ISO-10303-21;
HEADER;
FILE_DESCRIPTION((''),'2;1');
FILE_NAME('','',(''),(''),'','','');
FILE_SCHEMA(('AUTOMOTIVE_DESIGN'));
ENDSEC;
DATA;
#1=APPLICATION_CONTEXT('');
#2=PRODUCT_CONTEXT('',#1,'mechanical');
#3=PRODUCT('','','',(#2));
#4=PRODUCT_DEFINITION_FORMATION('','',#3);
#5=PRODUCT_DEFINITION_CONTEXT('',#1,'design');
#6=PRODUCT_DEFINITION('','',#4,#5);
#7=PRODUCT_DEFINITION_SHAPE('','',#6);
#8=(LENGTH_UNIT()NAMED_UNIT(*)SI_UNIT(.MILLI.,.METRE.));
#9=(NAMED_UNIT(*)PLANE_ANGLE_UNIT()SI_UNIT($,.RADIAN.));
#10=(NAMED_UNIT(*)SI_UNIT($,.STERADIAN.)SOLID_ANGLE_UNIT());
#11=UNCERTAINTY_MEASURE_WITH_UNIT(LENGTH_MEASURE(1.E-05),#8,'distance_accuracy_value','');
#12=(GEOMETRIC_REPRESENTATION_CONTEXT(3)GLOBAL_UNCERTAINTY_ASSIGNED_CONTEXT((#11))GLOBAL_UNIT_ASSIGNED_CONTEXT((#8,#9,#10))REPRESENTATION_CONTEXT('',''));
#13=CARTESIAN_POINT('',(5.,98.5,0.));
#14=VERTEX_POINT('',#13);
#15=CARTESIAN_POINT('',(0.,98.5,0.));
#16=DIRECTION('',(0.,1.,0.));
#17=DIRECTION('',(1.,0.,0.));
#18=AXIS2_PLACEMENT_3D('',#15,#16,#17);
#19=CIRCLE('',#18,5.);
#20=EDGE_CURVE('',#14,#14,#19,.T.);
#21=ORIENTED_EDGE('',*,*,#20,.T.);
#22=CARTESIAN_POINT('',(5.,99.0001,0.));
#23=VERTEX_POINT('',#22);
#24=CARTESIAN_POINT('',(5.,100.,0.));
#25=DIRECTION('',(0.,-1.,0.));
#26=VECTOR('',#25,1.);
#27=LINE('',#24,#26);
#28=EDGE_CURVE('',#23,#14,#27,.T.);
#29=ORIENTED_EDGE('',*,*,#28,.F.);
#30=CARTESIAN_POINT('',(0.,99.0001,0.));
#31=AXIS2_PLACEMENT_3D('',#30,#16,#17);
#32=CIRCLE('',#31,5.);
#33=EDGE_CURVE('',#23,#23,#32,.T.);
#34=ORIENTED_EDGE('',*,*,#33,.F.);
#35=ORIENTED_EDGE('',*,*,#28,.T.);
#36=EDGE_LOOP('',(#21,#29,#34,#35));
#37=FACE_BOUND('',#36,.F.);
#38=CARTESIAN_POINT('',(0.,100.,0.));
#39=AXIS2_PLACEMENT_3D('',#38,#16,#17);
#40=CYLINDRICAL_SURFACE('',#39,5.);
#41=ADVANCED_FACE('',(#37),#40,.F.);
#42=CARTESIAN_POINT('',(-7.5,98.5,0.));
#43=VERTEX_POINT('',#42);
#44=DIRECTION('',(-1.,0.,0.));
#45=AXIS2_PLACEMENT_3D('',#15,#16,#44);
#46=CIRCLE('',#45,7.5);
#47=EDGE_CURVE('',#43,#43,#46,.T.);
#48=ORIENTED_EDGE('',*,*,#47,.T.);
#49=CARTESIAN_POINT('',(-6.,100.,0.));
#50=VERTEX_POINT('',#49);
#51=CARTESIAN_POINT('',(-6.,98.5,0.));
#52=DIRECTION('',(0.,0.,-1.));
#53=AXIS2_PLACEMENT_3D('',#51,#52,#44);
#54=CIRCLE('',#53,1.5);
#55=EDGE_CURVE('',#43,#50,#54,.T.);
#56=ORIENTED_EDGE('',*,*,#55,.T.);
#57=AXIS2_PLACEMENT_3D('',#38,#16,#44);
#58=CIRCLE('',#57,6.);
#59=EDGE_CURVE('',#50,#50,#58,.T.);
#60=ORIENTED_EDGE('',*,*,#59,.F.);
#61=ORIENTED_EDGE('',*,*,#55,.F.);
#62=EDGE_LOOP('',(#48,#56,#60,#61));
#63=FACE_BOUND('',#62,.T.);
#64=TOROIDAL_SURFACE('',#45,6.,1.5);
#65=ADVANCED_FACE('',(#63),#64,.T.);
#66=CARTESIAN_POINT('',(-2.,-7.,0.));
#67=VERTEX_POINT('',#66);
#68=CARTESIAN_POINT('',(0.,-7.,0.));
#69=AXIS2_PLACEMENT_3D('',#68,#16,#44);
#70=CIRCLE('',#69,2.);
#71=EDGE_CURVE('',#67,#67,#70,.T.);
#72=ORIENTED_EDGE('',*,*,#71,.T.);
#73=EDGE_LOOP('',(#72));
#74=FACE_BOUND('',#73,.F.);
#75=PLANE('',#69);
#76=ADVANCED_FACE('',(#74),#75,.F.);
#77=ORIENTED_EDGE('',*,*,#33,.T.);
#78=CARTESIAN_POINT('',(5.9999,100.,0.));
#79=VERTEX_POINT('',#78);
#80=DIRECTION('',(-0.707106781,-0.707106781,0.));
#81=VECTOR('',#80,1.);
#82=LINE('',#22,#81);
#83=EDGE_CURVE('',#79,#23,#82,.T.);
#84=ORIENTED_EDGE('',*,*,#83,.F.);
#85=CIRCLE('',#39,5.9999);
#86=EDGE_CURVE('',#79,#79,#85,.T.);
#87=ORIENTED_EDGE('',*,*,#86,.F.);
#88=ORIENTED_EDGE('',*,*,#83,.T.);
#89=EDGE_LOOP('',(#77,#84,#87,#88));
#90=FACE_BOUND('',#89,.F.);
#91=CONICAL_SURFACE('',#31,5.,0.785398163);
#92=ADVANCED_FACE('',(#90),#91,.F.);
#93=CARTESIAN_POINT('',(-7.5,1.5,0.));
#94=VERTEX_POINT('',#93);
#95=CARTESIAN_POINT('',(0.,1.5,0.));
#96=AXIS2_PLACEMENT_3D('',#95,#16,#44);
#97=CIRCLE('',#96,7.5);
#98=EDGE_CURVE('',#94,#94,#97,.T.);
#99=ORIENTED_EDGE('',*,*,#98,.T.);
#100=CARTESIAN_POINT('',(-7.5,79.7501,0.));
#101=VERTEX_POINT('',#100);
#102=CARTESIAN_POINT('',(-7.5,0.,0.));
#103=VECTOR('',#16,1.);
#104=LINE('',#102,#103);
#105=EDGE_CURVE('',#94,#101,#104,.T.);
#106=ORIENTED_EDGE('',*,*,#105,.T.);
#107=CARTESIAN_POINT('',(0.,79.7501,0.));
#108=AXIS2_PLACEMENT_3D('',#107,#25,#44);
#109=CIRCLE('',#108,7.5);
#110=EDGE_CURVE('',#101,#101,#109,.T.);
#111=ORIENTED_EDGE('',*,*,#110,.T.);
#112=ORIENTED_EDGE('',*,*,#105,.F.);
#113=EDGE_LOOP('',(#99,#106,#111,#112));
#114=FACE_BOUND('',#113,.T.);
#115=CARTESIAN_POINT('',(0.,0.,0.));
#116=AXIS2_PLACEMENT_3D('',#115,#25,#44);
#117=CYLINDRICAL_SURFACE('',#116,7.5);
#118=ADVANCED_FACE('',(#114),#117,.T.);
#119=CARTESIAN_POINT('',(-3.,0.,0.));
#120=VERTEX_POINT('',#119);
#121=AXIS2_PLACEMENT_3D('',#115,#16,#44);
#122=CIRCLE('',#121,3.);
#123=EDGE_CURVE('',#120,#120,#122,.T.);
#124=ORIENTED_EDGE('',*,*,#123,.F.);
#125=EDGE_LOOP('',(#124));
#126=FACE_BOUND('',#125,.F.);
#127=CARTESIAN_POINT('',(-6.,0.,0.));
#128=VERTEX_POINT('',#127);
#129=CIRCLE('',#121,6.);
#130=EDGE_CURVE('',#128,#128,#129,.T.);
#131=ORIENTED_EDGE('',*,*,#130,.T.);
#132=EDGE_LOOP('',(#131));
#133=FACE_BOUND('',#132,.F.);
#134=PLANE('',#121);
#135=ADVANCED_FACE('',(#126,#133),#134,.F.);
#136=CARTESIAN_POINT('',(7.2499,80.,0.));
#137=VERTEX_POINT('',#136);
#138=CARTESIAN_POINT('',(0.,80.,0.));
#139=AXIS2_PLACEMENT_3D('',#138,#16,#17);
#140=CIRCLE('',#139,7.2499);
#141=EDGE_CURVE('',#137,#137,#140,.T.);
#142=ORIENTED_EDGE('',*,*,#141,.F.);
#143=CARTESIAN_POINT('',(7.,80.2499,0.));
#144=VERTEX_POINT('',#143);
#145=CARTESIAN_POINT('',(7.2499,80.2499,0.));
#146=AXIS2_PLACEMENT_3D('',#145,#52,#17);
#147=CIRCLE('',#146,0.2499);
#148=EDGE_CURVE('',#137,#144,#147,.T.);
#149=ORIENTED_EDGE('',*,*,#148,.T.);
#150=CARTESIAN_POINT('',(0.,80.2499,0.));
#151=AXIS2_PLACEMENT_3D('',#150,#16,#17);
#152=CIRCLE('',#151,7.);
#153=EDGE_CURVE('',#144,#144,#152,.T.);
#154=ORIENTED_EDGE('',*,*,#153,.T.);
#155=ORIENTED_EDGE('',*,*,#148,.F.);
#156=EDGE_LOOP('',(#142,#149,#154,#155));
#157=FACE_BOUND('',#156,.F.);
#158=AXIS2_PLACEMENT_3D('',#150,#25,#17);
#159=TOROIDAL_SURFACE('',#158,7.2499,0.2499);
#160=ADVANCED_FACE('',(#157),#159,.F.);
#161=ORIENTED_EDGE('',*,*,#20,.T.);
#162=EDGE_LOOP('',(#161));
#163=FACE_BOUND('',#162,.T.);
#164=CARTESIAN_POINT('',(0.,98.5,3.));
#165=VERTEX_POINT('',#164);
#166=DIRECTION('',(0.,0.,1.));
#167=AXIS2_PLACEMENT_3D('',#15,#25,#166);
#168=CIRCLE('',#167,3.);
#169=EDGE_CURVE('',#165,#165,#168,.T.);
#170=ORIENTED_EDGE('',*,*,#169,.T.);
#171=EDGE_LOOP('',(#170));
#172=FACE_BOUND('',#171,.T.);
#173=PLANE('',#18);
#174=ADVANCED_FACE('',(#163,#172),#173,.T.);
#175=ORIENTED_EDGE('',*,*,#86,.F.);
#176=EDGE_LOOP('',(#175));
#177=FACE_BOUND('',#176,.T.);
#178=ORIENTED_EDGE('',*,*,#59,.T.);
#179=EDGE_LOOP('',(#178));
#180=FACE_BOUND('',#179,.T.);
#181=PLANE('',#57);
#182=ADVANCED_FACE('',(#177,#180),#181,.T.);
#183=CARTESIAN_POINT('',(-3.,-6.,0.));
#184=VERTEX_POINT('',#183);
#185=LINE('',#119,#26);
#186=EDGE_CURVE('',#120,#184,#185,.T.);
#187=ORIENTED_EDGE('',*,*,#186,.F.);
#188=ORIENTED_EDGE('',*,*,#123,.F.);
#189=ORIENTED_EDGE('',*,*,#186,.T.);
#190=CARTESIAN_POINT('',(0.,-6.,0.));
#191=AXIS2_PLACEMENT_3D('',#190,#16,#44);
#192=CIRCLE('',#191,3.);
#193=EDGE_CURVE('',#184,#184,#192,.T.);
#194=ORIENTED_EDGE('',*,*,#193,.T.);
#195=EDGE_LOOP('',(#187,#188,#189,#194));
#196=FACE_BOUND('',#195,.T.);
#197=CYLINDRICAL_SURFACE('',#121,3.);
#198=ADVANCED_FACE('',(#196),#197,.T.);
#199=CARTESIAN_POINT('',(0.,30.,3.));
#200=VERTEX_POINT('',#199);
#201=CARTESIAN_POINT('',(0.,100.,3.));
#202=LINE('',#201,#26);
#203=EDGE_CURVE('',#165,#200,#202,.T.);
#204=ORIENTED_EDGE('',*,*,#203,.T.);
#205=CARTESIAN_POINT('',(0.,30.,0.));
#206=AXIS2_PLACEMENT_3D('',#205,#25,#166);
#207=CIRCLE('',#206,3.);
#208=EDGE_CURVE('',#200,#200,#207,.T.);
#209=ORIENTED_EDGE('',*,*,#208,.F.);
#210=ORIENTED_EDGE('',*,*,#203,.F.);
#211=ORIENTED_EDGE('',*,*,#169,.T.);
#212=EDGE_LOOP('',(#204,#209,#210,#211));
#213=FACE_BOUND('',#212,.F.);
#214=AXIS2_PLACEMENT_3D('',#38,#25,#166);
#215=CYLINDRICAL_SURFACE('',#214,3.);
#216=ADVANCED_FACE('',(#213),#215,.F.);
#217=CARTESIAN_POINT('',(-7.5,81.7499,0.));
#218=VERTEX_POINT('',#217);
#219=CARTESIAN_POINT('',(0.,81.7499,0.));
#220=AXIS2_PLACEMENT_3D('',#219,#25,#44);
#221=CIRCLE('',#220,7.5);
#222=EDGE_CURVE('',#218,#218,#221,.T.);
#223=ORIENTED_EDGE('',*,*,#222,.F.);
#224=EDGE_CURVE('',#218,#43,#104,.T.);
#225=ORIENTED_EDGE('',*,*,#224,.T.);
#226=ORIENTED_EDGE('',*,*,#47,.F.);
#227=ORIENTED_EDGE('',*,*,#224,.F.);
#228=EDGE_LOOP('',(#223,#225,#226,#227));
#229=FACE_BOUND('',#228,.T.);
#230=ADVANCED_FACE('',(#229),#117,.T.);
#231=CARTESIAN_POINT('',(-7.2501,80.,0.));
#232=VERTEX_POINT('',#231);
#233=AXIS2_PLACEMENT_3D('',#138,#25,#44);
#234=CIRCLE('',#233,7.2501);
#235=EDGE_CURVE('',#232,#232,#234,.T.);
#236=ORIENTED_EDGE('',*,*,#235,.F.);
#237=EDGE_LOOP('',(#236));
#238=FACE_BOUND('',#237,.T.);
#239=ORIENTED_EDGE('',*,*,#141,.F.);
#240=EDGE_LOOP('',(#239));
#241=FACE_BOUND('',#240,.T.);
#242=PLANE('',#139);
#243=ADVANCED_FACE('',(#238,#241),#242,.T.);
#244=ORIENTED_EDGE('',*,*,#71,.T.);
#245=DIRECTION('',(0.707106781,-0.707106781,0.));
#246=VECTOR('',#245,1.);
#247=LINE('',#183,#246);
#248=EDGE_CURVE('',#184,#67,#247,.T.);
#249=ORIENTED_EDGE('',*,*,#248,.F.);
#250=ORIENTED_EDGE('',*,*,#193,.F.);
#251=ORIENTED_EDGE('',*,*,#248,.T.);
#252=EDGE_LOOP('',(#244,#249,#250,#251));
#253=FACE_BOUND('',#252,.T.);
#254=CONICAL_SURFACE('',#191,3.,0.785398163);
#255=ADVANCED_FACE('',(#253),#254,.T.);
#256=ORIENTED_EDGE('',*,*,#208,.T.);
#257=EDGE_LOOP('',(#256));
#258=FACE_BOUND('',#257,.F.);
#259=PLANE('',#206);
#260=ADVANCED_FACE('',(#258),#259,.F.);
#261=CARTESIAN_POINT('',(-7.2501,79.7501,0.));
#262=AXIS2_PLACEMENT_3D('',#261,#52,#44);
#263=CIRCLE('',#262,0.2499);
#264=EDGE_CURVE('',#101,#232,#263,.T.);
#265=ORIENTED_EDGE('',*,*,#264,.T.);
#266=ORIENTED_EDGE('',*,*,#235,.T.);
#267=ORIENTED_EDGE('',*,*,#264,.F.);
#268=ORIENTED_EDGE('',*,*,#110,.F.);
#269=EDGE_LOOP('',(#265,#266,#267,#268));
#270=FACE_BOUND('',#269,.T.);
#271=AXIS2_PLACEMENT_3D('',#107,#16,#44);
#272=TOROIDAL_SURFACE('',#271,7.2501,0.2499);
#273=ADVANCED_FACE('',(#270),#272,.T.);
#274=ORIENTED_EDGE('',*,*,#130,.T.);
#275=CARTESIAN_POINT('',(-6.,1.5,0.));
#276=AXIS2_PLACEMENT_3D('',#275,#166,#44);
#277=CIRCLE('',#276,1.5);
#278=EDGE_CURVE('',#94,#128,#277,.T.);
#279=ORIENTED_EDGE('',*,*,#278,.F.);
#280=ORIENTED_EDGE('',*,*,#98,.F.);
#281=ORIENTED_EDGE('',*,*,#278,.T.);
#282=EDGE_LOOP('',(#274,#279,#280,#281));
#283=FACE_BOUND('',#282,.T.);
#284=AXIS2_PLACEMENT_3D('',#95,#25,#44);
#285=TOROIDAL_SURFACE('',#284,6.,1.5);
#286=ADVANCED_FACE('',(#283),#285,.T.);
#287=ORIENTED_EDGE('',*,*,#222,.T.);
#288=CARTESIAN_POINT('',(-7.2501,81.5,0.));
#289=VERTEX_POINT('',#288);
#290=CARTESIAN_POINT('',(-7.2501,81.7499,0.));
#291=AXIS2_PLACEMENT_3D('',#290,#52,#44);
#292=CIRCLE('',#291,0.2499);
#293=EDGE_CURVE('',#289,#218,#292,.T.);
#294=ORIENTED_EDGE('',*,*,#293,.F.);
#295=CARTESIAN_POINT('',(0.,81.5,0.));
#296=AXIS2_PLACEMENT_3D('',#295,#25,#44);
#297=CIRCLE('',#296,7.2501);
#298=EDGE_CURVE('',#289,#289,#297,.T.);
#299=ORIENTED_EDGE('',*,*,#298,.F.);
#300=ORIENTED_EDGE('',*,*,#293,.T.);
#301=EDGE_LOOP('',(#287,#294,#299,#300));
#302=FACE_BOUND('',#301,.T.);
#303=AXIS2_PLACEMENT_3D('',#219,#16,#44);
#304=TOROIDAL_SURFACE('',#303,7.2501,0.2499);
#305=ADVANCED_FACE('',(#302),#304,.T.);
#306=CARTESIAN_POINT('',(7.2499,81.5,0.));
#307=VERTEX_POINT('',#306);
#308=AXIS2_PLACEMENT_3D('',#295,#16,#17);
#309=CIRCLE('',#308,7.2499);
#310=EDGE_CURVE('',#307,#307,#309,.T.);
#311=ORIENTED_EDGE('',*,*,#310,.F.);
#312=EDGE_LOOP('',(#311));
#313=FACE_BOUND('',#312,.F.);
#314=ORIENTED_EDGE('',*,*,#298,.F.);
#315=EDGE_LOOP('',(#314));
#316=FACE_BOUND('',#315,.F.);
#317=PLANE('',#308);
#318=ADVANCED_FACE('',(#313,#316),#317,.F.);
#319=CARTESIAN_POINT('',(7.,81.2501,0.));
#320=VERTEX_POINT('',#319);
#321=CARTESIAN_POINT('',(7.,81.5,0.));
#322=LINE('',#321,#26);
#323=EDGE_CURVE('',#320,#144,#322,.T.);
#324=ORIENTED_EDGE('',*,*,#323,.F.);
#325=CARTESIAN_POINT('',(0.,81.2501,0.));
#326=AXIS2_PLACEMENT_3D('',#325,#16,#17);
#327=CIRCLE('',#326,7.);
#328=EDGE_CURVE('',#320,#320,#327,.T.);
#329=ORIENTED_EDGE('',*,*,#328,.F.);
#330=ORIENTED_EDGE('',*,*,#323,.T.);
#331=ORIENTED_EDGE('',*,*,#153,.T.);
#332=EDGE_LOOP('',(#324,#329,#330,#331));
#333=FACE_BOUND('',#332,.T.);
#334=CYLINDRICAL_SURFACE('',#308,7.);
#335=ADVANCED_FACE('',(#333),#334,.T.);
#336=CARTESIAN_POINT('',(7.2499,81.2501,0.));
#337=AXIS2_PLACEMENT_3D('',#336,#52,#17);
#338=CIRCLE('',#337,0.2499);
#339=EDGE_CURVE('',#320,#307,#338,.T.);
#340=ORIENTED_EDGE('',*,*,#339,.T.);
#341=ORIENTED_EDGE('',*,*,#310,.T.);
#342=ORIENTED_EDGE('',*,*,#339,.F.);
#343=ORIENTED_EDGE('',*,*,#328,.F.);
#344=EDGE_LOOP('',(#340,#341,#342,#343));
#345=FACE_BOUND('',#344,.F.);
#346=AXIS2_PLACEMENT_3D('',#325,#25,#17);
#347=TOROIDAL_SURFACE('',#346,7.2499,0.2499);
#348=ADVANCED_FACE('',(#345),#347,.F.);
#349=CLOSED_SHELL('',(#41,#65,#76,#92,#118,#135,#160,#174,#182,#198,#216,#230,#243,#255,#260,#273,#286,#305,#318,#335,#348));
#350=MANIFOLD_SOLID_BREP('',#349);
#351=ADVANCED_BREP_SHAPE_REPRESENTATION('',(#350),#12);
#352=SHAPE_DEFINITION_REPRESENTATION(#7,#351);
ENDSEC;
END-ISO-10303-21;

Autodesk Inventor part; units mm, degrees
ref_plane "YZ Plane" through (0, 0, 0) normal (1, 0, 0) x (0, 1, 0)
ref_plane "XZ Plane" through (0, 0, 0) normal (0, 1, 0) x (-1, 0, 0)
sketch "Sketch1" plane through (0, 0, 0) normal (0, 1, 0) x (-1, 0, 0)
  circle A0 centre (0, 0) radius 7.5
  circle A1 centre (0, 0) radius 3
  dimension "d0" = 15
  dimension "d3" = 6
extrude "Extrusion1" add sketch "Sketch1" along normal blind 100 contours A0 | A1
extrude "Extrusion2" add sketch "Sketch1" against normal blind 7 contours A1
sketch "Sketch2" plane through (0, 100, 0) normal (0, 1, 0) x (1, 0, 0)
  circle A0 centre (0, 0) radius 3 projected
  circle A1 centre (0, 0) radius 3
  circle A2 centre (0, 0) radius 5
  dimension "d6" = 6
  dimension "d20" = 10
hole "Hole1" at (0, 100, 0) direction (0, -1, 0) diameter 6 depth 70
ref_plane "Work Plane1" through (0, 81.5, 0) normal (0, 1, 0) x (1, 0, 0)
sketch "Sketch3" plane through (0, 81.5, 0) normal (0, 1, 0) x (1, 0, 0)
  circle A0 centre (0, 0) radius 3 projected
  circle A1 centre (0, 0) radius 7
  circle A2 centre (0, 0) radius 7.5
  dimension "d27" = 14
extrude "Extrusion4" cut sketch "Sketch3" against normal blind 1.5 contours A2
fillet "Fillet2" radius 0.25 4 edges at (-7, 81.5, 0) (-7, 80, 0) (7.5, 81.5, 0) (7.5, 80, 0)
thread "Thread1" size "M6x1" class "6g" standard "ANSI Metric M Profile" full length
fillet "Fillet1" radius 1.5 2 edges at (7.5, 0, 0) (7.5, 100, 0)
chamfer "Chamfer1" distance 1 angle 45 1 edges at (3, -7, 0)
extrude "Extrusion3" cut sketch "Sketch2" against normal blind 1.5
chamfer "Chamfer2" distance 1 angle 45 1 edges at (-5, 100, 0)
properties part number "Cylinder" material "Stainless Steel"
